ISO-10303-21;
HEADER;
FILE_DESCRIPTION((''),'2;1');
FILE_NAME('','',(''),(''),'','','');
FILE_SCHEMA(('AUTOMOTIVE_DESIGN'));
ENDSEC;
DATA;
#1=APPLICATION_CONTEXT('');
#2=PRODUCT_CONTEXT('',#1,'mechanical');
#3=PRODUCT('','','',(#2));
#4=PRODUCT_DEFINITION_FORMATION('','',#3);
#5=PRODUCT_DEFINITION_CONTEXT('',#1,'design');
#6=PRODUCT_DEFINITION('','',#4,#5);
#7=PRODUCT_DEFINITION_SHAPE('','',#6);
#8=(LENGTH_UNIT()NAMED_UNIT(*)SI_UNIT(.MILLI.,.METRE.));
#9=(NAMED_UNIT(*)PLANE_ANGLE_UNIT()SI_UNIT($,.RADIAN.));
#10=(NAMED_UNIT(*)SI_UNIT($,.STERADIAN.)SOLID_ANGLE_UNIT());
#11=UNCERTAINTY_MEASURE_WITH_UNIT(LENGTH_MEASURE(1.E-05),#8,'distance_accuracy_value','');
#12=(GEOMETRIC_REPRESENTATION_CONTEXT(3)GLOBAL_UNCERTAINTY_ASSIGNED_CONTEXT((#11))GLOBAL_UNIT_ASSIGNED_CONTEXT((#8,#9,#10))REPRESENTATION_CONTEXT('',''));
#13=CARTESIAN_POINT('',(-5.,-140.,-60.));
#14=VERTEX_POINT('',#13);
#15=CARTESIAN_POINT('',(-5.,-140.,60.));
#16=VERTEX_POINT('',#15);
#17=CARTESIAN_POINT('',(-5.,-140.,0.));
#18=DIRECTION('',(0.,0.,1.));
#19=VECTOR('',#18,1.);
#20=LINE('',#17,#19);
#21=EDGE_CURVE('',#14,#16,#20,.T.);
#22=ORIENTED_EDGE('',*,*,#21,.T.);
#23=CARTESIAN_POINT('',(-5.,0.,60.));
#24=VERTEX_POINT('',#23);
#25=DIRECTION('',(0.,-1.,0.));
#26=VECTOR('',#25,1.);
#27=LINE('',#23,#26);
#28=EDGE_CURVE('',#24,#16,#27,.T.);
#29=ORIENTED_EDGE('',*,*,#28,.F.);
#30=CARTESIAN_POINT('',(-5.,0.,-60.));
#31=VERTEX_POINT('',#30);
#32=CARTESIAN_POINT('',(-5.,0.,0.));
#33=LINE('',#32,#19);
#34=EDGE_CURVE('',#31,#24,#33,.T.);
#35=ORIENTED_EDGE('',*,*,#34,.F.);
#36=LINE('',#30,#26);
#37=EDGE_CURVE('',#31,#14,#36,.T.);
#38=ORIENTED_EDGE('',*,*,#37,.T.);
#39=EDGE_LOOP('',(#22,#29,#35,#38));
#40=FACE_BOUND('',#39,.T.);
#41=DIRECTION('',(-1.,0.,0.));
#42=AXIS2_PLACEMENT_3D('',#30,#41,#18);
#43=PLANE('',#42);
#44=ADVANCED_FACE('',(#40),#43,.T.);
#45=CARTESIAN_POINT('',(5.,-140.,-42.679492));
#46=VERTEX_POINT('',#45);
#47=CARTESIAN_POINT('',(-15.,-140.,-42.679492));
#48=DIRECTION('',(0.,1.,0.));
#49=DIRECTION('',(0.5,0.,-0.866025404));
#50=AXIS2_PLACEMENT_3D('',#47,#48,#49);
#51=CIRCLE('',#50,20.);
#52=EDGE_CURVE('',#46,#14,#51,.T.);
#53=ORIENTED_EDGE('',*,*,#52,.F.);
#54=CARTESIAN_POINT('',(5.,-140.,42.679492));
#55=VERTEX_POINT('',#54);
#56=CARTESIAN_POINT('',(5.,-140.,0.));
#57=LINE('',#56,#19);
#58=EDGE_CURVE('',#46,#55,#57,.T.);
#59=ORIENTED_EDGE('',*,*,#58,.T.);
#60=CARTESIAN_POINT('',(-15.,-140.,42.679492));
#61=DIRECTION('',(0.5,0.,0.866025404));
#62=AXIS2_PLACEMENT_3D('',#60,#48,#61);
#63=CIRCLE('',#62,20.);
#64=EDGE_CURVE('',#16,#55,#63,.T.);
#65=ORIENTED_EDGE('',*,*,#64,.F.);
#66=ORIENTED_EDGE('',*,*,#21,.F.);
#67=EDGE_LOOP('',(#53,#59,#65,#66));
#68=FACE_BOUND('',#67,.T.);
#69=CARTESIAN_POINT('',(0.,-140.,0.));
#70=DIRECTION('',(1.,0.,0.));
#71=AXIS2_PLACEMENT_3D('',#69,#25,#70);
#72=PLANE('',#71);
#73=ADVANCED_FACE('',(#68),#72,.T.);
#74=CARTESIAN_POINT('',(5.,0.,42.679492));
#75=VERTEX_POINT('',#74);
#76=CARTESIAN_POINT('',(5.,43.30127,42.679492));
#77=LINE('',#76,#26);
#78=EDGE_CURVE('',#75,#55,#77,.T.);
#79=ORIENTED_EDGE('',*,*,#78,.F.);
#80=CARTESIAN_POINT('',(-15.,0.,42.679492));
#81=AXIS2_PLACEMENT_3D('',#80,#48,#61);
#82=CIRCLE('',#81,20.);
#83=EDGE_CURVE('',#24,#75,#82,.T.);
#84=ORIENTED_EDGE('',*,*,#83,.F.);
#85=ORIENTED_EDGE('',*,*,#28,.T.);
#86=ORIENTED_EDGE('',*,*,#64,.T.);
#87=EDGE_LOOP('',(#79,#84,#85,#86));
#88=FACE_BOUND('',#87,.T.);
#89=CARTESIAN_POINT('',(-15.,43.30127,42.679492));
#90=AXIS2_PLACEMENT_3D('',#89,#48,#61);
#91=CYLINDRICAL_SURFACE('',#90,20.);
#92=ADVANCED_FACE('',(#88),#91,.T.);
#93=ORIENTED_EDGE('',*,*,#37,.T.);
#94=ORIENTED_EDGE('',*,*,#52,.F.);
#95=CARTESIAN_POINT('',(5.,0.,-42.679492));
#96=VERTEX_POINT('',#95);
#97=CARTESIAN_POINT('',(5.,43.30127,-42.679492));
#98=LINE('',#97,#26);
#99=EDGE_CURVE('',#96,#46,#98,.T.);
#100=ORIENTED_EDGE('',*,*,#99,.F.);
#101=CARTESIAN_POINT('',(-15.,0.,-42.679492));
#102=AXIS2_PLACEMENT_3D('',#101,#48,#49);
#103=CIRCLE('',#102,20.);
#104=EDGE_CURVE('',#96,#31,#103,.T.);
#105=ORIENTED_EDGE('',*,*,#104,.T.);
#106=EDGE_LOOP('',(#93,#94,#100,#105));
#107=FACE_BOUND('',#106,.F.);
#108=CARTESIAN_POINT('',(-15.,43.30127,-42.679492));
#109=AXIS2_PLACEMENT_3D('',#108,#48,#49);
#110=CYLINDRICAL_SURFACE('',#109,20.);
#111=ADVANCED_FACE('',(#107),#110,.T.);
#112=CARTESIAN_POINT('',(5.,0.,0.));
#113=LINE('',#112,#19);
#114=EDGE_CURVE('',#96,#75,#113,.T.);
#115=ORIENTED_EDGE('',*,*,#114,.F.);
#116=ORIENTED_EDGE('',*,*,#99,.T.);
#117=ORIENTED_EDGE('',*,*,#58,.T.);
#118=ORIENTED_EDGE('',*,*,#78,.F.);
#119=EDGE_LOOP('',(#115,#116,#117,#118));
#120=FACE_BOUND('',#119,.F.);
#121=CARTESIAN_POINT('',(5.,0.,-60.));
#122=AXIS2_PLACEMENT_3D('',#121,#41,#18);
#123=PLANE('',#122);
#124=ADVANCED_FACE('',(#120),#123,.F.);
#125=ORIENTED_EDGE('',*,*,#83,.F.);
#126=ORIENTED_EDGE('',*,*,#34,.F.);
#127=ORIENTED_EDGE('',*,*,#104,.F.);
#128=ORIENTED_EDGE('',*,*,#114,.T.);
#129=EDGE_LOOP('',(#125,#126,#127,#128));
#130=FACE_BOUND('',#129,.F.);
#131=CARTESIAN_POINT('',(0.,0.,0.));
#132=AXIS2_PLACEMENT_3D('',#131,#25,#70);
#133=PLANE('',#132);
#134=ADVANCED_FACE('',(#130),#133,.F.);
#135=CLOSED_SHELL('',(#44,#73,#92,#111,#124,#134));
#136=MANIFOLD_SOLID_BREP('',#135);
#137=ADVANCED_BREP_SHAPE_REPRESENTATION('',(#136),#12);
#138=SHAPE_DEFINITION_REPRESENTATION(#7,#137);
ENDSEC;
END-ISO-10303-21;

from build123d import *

# Parameters (mm, degrees)
F0_W        = 10
F0_H        = 120
F1_DEPTH    = 140
F2_T1_DEPTH = 226.6025403784


# Not quite as in the source:
# - a fillet or chamfer that OpenCascade refuses, or shapes differently, is made with other operations: its cross-section is extruded or revolved along the edge and cut away or added


with BuildPart() as f1:
    # F0 (on Front) → F1 (new body)
    with BuildSketch(Plane.XZ):
        Rectangle(F0_W, F0_H)
    extrude(amount=F1_DEPTH)

    # F2: fillet of radius 20 on 2 edges, made by hand

    # F2_s2 → F2_t1 (cut)
    with BuildSketch(Plane.XZ.offset(-43.3012701892)):
        with BuildLine():
            ThreePointArc((-5, 60), (2.3205080757, 52.6794919243), (5, 42.6794919243))
            Line((5, 42.6794919243), (5, 60))
            Line((5, 60), (-5, 60))
        make_face()
        with BuildLine():
            ThreePointArc((-5, -60), (2.3205080757, -52.6794919243), (5, -42.6794919243))
            Line((5, -42.6794919243), (5, -60))
            Line((5, -60), (-5, -60))
        make_face()
    extrude(amount=F2_T1_DEPTH, mode=Mode.SUBTRACT)


solid = f1.part
